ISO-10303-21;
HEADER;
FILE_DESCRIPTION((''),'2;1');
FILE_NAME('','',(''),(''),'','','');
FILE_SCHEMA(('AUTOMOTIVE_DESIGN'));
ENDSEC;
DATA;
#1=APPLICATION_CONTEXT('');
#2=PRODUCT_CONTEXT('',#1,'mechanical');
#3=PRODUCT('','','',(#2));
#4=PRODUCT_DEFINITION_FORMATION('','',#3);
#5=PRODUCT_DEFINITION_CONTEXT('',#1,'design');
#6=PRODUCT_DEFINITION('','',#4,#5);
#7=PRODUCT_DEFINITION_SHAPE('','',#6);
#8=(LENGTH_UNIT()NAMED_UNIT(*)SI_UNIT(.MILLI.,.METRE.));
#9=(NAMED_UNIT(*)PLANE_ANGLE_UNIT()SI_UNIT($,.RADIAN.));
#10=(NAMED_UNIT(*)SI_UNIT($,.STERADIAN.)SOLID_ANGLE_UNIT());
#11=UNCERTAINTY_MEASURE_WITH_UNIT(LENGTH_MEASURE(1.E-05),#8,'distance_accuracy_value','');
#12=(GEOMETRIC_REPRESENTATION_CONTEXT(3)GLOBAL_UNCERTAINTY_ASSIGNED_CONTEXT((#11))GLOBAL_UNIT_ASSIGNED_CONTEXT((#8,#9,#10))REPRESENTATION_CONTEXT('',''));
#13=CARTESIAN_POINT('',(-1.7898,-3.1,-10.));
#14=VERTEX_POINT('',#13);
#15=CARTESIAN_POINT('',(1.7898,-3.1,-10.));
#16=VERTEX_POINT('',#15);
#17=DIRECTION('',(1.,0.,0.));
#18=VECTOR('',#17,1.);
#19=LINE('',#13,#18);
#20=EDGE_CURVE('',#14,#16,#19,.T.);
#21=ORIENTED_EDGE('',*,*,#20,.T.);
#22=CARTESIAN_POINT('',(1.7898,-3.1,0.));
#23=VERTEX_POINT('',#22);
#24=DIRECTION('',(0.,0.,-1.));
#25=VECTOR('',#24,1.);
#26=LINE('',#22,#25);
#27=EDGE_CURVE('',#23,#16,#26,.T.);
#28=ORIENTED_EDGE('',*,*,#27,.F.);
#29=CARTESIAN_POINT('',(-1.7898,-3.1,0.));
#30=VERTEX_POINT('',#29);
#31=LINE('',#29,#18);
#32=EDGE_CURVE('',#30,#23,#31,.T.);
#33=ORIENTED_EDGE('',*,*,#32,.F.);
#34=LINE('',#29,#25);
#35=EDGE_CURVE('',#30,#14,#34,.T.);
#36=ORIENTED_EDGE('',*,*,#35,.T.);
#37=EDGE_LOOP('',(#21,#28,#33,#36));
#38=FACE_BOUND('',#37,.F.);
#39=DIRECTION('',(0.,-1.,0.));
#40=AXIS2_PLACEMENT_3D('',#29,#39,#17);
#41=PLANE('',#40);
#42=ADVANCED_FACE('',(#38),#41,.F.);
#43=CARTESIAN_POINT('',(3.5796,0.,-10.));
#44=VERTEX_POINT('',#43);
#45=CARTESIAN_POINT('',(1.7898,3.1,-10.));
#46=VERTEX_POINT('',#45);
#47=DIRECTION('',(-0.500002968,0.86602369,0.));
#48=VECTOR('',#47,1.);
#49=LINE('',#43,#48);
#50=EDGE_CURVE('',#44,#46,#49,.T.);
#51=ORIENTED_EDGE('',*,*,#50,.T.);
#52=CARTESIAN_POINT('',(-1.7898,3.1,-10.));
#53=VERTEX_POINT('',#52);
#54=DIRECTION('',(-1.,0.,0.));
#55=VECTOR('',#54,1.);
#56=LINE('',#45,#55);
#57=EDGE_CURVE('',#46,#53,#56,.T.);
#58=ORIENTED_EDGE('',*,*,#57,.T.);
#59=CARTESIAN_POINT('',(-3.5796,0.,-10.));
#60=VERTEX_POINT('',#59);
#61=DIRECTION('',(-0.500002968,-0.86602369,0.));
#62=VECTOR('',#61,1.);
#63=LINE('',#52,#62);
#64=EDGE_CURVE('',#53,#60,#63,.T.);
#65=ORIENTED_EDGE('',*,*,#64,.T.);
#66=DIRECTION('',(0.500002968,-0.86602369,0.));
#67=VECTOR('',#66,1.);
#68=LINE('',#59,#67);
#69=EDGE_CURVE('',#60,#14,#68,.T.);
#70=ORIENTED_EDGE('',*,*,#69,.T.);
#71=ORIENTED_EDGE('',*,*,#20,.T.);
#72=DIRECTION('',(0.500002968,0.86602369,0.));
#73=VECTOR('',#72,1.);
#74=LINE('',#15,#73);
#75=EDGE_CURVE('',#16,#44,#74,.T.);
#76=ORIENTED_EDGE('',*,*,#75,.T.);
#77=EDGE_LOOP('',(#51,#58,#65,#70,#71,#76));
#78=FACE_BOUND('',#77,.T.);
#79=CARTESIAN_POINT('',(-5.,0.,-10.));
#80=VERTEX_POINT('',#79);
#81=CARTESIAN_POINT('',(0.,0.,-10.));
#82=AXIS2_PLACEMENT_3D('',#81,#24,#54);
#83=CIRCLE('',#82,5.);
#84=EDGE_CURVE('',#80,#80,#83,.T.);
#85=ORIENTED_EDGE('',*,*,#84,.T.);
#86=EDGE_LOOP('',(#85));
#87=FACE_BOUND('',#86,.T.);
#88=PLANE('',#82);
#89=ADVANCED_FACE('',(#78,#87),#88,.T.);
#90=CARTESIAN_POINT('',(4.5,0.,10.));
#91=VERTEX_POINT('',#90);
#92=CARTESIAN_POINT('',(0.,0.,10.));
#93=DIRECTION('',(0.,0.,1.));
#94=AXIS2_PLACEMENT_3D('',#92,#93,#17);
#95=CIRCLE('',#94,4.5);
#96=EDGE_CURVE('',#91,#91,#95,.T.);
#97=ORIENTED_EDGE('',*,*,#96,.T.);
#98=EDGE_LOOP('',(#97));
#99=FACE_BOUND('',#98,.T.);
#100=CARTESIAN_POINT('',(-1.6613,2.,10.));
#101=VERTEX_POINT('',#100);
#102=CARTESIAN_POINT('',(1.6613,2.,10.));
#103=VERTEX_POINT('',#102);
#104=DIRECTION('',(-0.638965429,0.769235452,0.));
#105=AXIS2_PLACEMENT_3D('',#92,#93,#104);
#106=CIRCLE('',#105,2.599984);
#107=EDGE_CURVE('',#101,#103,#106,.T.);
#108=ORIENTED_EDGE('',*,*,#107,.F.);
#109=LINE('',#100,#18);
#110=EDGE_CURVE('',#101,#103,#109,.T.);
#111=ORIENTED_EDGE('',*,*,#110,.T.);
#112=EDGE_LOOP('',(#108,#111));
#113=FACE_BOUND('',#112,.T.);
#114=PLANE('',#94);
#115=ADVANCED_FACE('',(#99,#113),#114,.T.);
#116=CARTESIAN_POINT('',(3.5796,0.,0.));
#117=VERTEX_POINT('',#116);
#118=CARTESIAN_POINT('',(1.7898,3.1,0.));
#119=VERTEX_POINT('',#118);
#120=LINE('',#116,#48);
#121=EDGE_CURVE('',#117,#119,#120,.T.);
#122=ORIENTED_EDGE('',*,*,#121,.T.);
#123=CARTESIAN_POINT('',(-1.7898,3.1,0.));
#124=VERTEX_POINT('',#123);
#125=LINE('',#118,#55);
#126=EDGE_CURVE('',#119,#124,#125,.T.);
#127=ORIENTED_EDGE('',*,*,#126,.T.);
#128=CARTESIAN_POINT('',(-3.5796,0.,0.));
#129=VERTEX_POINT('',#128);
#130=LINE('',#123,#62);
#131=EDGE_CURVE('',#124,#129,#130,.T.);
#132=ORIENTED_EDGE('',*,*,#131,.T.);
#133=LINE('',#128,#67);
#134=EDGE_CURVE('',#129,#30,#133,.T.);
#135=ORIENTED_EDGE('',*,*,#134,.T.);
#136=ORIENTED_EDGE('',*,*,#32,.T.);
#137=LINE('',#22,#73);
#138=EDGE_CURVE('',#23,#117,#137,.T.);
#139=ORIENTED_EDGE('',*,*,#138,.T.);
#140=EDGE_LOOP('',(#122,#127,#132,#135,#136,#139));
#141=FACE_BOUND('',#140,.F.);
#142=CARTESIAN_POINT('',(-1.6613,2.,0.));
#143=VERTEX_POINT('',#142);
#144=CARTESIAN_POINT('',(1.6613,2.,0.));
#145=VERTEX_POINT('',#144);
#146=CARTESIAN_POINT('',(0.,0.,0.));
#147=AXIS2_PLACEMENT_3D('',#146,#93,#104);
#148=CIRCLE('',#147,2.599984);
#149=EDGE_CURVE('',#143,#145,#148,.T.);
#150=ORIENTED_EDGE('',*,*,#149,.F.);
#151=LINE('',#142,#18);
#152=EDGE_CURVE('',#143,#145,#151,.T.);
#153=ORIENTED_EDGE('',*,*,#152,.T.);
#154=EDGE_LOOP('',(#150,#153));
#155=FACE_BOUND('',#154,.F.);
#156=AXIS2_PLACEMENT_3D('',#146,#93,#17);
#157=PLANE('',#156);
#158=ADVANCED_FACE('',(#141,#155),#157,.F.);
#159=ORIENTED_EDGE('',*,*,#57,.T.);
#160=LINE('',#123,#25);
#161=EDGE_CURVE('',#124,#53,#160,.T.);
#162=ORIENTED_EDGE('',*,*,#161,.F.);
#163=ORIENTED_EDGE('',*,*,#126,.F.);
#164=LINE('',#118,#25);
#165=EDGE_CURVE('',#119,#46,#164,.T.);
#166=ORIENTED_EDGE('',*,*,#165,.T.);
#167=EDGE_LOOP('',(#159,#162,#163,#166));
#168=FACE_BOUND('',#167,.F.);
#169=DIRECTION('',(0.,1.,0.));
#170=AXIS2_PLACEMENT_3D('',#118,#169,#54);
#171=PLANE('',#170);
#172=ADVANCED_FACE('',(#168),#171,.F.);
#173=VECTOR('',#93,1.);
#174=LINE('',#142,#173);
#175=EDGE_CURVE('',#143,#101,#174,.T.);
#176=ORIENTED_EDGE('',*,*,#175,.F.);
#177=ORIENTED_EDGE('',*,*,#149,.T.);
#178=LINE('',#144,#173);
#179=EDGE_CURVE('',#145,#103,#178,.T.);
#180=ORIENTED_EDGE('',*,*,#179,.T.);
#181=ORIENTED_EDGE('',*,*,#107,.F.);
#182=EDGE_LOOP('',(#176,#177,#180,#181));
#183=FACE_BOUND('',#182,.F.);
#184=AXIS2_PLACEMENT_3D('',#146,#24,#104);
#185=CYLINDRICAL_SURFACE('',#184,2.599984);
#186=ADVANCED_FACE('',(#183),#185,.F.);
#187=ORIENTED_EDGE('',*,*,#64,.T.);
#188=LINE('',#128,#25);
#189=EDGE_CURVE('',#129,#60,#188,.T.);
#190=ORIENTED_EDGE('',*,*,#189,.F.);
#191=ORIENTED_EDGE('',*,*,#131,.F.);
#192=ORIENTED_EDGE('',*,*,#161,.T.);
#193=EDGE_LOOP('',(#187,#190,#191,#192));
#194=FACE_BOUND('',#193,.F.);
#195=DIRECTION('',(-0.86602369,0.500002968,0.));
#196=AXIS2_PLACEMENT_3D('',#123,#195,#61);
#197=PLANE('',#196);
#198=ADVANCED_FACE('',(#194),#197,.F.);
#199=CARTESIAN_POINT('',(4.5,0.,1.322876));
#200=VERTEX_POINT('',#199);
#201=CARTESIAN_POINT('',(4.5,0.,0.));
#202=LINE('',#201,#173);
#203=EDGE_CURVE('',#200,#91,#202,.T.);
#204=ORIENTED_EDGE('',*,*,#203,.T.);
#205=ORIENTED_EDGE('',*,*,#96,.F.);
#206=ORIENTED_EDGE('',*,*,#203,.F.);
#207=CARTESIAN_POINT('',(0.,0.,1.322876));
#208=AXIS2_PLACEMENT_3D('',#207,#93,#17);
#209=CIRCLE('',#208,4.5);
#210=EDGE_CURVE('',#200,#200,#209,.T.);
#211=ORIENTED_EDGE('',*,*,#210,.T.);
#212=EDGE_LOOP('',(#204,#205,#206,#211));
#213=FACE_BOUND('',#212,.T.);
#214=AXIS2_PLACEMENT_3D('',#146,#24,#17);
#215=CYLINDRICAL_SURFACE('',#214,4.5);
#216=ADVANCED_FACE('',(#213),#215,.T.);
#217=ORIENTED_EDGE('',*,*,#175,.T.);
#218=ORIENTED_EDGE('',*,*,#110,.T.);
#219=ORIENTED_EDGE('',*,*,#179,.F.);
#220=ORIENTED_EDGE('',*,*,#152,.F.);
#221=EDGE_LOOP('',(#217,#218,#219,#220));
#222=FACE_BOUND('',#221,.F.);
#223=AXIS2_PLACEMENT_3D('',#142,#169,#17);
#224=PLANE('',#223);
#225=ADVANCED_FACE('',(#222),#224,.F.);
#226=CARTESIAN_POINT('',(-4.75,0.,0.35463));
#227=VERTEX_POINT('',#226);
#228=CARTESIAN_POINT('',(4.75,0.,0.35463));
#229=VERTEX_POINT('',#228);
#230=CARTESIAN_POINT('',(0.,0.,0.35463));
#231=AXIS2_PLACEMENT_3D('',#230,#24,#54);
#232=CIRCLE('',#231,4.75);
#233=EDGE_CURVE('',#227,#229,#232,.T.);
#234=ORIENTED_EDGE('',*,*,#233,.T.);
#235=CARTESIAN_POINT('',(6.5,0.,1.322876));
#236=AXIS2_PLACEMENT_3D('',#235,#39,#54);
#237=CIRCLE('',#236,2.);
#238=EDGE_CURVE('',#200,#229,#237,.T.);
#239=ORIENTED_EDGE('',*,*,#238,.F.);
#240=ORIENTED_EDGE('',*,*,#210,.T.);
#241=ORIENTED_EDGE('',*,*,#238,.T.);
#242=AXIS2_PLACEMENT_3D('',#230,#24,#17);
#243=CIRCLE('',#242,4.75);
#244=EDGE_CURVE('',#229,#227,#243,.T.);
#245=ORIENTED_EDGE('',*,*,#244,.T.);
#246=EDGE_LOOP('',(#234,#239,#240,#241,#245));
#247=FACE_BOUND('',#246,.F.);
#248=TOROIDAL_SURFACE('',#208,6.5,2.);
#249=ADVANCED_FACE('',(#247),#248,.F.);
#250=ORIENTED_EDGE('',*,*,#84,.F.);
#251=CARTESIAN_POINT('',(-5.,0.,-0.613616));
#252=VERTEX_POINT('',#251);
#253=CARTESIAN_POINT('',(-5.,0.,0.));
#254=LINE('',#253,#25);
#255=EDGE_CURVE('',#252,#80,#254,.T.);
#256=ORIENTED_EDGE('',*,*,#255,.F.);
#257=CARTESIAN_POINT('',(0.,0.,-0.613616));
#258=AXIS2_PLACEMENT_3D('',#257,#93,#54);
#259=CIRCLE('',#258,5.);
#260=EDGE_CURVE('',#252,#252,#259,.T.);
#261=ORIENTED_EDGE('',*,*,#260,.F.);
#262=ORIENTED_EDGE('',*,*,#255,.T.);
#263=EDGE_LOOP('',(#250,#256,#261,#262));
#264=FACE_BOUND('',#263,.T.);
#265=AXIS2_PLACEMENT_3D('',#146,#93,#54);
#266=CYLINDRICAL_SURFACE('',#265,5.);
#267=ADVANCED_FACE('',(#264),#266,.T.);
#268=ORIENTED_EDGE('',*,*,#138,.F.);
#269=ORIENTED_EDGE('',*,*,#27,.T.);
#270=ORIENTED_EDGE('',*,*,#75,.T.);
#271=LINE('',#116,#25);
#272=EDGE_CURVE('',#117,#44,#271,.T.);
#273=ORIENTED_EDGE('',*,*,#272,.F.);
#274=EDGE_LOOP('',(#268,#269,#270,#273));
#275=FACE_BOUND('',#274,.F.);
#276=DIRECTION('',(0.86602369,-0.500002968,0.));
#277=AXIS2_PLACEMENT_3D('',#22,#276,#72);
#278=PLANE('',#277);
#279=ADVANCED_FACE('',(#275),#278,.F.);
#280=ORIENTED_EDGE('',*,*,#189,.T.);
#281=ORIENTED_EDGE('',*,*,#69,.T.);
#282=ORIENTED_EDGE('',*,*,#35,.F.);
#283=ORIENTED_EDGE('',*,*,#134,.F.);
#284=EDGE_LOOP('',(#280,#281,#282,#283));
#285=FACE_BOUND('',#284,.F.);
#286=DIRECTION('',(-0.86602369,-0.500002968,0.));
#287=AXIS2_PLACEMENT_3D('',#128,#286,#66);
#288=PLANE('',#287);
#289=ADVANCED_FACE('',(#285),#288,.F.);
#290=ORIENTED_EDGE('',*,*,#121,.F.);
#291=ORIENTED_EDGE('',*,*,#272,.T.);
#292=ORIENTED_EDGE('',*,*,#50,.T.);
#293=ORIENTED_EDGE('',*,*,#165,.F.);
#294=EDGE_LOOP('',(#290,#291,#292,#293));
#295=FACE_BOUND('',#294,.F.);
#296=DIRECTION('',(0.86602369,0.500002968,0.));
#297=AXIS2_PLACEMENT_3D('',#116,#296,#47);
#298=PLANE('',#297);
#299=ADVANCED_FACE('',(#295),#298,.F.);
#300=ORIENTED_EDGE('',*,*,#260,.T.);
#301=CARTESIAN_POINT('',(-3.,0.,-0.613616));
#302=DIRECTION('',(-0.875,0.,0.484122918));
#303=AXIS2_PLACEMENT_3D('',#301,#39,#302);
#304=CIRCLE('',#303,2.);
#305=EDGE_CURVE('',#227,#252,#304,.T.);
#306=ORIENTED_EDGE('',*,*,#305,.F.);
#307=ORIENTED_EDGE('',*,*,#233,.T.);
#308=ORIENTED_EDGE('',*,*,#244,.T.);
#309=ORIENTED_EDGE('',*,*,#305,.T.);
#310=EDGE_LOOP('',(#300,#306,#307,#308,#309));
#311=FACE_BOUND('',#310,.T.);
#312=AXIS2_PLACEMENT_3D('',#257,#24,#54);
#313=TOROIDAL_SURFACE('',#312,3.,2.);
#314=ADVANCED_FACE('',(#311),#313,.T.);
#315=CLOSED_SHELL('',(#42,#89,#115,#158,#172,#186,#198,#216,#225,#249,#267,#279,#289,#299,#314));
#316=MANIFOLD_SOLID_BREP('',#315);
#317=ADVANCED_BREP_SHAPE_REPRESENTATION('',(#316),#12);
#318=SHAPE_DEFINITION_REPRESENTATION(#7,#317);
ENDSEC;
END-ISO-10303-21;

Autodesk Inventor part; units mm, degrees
ref_plane "YZ Plane" through (0, 0, 0) normal (1, 0, 0) x (0, 1, 0)
ref_plane "XZ Plane" through (0, 0, 0) normal (0, 1, 0) x (-1, 0, 0)
ref_plane "XY Plane" through (0, 0, 0) normal (0, 0, 1) x (1, 0, 0)
sketch "Sketch1" plane through (0, 0, 0) normal (0, 0, 1) x (1, 0, 0)
  arc A0 (-1.6613, 2) -> (1.6613, 2) centre (0, 0) ccw
  line L0 (-1.6613, 2) -> (1.6613, 2)
  circle A1 centre (0, 0) radius 4.5
  dimension "d0" = 5.2
  dimension "d1" = 4.6
  dimension "d2" = 9
extrude "Extrusion1" add sketch "Sketch1" along normal blind 10
sketch "Sketch2" plane through (0, 0, 0) normal (0, 0, -1) x (-1, 0, 0)
  line L0 (1.7898, 3.1) -> (3.5796, 0)
  line L1 (3.5796, 0) -> (1.7898, -3.1)
  line L2 (1.7898, -3.1) -> (-1.7898, -3.1)
  line L3 (-1.7898, -3.1) -> (-3.5796, 0)
  line L4 (-3.5796, 0) -> (-1.7898, 3.1)
  line L5 (-1.7898, 3.1) -> (1.7898, 3.1)
  circle A0 centre (0, 0) radius 5
  dimension "d5" = 6.2
  dimension "d6" = 10
extrude "Extrusion2" add sketch "Sketch2" along normal blind 10
fillet "Fillet1" radius 2 2 edges at (-4.5, 0, 0) (5, 0, 0)
properties part number "Motor to hex coupler"
